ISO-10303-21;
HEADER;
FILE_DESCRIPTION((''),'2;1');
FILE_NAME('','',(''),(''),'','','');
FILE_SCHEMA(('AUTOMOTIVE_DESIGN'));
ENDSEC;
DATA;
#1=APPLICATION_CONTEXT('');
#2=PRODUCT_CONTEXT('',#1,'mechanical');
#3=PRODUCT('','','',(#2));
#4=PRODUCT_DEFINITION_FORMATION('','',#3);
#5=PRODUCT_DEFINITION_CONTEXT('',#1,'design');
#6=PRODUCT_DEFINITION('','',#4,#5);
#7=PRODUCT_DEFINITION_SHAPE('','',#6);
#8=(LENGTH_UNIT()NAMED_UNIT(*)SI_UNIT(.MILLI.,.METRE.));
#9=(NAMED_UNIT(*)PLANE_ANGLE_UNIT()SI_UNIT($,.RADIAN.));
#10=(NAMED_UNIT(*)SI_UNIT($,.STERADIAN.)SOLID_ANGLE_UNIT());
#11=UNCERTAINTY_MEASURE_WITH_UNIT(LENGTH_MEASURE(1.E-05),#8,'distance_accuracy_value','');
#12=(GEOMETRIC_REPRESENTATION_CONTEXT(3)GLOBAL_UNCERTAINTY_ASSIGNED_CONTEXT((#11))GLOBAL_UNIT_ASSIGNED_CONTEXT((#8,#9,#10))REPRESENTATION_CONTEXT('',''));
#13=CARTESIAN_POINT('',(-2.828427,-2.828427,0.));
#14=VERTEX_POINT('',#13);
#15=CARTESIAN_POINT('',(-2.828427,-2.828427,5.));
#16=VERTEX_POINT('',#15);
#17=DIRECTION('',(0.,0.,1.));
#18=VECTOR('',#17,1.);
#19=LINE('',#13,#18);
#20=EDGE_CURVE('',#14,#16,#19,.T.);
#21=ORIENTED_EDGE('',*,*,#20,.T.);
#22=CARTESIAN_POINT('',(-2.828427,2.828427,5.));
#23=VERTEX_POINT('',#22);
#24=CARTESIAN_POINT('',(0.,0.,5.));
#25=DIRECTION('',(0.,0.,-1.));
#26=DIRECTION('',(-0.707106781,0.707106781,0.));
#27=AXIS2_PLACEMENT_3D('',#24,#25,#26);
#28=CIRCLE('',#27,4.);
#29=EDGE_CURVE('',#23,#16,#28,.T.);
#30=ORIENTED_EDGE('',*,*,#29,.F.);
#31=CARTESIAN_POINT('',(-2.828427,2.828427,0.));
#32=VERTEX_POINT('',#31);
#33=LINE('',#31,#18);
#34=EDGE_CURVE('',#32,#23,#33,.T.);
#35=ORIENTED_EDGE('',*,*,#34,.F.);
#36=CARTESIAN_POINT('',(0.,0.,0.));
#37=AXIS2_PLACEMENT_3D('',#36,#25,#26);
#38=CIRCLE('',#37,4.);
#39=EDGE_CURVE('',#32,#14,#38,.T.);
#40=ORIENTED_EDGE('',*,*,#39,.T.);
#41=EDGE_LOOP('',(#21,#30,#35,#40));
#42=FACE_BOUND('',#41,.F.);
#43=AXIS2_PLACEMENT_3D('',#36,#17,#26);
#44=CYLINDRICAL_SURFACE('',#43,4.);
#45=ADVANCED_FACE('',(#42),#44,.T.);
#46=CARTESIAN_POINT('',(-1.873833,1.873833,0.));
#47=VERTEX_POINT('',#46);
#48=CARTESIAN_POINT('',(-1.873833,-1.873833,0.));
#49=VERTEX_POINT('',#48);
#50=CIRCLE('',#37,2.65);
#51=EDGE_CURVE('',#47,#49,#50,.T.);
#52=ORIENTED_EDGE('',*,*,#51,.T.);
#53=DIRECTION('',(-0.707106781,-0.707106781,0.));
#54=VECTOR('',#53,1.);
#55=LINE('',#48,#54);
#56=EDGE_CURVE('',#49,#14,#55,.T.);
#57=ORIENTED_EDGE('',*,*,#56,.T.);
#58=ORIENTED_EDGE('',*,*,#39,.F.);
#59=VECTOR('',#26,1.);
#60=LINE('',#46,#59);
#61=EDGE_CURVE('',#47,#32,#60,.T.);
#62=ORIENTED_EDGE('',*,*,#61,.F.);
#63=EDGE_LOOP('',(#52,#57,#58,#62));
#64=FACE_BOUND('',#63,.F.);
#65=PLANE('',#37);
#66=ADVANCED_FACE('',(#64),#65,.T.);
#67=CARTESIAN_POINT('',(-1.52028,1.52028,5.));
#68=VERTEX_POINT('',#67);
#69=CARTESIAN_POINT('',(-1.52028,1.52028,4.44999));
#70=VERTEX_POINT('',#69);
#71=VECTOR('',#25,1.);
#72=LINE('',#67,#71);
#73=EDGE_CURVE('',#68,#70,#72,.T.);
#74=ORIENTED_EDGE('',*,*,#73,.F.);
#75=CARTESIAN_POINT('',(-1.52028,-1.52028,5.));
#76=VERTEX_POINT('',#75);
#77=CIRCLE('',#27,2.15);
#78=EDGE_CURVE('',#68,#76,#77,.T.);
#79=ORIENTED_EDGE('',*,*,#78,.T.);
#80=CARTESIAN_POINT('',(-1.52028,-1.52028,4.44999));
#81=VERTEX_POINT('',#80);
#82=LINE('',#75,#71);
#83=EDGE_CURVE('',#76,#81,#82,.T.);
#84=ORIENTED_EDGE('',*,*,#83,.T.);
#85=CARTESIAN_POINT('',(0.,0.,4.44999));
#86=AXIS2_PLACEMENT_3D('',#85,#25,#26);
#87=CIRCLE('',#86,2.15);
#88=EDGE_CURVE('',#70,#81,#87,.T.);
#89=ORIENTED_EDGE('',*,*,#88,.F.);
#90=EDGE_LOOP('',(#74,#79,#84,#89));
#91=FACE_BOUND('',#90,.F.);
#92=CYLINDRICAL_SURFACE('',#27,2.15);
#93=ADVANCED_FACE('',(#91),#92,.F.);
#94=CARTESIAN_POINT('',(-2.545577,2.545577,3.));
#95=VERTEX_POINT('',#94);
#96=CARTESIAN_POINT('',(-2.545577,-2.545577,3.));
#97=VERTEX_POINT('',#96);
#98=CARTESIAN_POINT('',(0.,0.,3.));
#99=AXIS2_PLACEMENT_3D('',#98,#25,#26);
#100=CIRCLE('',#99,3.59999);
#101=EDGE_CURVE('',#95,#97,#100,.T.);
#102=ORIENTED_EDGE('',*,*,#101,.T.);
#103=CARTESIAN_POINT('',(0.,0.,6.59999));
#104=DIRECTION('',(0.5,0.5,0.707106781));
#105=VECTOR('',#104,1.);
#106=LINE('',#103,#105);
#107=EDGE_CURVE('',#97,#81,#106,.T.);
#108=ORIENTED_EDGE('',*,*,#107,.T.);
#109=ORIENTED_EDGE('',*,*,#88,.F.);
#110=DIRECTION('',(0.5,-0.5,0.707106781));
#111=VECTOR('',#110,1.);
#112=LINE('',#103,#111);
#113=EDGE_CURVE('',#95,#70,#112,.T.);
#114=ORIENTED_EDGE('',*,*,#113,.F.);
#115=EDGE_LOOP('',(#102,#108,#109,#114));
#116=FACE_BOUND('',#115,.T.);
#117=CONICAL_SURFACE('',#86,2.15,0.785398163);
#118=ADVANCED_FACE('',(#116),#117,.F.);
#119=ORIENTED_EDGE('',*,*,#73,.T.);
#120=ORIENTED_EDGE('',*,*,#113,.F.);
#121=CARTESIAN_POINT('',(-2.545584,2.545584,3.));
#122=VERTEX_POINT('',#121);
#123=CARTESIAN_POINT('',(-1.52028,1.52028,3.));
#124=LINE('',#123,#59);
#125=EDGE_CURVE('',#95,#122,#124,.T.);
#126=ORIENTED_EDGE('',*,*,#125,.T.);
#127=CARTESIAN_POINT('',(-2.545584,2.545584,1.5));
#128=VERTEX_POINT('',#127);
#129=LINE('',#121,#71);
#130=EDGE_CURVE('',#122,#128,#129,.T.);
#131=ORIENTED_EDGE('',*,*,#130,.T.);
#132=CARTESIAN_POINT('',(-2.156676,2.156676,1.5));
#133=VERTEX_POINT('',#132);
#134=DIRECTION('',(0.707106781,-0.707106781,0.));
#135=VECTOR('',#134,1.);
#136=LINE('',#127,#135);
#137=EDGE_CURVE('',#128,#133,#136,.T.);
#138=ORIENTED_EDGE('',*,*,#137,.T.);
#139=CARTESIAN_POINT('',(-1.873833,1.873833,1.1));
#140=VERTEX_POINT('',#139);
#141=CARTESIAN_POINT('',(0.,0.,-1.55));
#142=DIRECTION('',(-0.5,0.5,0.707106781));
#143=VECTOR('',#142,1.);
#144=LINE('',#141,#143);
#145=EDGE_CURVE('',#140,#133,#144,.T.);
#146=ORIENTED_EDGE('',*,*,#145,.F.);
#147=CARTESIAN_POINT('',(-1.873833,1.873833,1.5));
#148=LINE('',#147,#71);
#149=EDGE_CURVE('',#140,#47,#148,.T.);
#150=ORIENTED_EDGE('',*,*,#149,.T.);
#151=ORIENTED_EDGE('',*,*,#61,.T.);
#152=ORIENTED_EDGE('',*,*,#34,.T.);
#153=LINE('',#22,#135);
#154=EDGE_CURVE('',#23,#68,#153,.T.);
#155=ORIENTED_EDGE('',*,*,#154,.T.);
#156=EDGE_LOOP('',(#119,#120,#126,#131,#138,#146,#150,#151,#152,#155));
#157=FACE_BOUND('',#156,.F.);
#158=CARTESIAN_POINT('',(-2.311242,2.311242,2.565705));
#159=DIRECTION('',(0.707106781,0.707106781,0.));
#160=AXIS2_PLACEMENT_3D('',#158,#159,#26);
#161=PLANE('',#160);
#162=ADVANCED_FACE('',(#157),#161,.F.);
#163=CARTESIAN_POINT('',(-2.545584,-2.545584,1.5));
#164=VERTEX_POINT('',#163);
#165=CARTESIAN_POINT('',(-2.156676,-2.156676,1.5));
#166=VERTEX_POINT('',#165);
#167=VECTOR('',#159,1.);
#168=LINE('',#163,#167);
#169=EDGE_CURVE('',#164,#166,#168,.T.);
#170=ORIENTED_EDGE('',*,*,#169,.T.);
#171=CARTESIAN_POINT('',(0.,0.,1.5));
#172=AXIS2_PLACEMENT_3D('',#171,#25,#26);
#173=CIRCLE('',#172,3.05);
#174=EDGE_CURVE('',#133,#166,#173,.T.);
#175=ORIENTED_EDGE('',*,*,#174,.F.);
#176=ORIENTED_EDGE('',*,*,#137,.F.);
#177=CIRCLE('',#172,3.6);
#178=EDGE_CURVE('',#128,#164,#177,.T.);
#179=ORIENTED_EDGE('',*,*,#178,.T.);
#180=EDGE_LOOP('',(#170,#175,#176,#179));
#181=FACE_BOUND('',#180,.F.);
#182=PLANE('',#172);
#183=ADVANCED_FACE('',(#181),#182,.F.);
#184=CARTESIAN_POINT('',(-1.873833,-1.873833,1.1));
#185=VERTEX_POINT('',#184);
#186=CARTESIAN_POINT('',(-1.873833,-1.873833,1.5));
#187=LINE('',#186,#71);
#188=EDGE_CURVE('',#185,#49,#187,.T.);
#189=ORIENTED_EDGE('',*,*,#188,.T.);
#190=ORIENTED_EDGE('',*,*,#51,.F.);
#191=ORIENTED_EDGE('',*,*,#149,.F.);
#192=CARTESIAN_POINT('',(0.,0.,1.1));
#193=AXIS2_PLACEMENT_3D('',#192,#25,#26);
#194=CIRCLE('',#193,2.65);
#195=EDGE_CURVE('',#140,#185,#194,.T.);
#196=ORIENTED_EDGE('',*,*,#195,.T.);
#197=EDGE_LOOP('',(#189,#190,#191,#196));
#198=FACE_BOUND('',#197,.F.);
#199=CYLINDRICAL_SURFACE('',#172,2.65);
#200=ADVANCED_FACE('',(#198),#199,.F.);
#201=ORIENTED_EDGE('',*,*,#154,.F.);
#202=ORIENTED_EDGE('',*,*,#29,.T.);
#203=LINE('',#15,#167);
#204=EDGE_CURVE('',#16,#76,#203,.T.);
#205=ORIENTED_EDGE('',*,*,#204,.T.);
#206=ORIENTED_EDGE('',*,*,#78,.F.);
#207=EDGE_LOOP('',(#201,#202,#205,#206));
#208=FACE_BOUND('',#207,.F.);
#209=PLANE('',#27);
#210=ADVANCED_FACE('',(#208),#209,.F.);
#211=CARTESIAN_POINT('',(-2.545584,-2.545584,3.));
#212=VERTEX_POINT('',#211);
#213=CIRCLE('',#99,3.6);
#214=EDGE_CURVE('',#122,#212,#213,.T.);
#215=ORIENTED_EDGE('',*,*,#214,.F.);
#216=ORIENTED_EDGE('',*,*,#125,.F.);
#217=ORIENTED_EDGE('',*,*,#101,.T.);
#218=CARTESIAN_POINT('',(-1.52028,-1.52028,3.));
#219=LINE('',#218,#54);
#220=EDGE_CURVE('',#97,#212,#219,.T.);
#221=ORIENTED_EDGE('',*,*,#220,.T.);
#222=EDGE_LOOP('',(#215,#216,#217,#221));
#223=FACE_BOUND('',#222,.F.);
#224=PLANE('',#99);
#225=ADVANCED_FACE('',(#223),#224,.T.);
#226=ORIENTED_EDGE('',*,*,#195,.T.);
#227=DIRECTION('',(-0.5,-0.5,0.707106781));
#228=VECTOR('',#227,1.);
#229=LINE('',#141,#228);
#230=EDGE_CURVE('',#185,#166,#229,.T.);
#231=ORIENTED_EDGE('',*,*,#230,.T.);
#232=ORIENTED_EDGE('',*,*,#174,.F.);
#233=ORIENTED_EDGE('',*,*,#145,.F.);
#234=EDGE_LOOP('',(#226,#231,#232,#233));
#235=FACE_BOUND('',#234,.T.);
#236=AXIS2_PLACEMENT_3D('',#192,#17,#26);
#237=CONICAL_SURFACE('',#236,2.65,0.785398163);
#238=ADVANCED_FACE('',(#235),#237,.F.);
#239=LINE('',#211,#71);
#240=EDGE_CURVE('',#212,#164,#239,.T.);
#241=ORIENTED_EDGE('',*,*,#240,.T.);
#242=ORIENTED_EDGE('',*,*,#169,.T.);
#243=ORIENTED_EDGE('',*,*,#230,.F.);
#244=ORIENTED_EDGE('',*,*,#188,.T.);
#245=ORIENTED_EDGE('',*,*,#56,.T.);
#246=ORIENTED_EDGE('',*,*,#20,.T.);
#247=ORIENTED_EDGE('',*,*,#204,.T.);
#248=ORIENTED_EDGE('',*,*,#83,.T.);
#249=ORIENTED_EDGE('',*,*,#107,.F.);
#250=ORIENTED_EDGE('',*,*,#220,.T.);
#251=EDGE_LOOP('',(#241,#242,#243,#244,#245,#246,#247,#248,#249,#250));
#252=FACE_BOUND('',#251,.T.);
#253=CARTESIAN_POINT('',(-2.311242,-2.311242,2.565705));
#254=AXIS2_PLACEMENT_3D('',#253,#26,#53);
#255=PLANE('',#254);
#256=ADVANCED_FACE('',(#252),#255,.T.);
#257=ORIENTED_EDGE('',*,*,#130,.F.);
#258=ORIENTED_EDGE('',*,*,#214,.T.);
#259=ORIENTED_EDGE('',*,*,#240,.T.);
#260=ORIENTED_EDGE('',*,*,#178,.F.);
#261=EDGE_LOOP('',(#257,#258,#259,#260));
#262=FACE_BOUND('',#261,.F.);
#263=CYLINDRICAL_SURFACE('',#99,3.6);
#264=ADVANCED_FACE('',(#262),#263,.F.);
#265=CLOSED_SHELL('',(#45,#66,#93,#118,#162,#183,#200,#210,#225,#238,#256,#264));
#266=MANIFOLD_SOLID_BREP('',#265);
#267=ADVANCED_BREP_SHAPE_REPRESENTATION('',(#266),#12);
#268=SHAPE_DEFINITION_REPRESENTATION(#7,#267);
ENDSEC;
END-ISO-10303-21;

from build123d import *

# Parameters (mm, degrees)
F1_ANGLE_BACK = 135
F1_ANGLE      = 270
F2_SIZE       = 0.4
F3_SIZE       = 1.44999


# Not quite as in the source:
# - a fillet or chamfer is up to 0.001 mm smaller than in the source, because OpenCascade refuses the exact size


with BuildPart() as f1:
    # F0 (on Front) → F1 (revolve)
    with BuildSketch(Plane.XZ, mode=Mode.PRIVATE) as f1_sk:
        Polygon((2.65, 1.5), (2.65, 0), (4, 0), (4, 5), (2.15, 5), (2.15, 3), (3.6, 3), (3.6, 1.5), align=None)
    revolve(f1_sk.sketch.rotate(Axis((0, 0, 2.5), (0, 0, -1)), -F1_ANGLE_BACK), axis=Axis((0, 0, 2.5), (0, 0, -1)), revolution_arc=F1_ANGLE)

    # F2
    f2_edges = [f1.edges().sort_by_distance(p)[0] for p in [
        (2.65, 0, 1.5),
    ]]
    chamfer(f2_edges, length=F2_SIZE)

    # F3 (size 1.45 in the source; OpenCascade refuses exactly that, so slightly less here)
    f3_edges = [f1.edges().sort_by_distance(p)[0] for p in [
        (2.15, 0, 3),
    ]]
    chamfer(f3_edges, length=F3_SIZE)


solid = f1.part
